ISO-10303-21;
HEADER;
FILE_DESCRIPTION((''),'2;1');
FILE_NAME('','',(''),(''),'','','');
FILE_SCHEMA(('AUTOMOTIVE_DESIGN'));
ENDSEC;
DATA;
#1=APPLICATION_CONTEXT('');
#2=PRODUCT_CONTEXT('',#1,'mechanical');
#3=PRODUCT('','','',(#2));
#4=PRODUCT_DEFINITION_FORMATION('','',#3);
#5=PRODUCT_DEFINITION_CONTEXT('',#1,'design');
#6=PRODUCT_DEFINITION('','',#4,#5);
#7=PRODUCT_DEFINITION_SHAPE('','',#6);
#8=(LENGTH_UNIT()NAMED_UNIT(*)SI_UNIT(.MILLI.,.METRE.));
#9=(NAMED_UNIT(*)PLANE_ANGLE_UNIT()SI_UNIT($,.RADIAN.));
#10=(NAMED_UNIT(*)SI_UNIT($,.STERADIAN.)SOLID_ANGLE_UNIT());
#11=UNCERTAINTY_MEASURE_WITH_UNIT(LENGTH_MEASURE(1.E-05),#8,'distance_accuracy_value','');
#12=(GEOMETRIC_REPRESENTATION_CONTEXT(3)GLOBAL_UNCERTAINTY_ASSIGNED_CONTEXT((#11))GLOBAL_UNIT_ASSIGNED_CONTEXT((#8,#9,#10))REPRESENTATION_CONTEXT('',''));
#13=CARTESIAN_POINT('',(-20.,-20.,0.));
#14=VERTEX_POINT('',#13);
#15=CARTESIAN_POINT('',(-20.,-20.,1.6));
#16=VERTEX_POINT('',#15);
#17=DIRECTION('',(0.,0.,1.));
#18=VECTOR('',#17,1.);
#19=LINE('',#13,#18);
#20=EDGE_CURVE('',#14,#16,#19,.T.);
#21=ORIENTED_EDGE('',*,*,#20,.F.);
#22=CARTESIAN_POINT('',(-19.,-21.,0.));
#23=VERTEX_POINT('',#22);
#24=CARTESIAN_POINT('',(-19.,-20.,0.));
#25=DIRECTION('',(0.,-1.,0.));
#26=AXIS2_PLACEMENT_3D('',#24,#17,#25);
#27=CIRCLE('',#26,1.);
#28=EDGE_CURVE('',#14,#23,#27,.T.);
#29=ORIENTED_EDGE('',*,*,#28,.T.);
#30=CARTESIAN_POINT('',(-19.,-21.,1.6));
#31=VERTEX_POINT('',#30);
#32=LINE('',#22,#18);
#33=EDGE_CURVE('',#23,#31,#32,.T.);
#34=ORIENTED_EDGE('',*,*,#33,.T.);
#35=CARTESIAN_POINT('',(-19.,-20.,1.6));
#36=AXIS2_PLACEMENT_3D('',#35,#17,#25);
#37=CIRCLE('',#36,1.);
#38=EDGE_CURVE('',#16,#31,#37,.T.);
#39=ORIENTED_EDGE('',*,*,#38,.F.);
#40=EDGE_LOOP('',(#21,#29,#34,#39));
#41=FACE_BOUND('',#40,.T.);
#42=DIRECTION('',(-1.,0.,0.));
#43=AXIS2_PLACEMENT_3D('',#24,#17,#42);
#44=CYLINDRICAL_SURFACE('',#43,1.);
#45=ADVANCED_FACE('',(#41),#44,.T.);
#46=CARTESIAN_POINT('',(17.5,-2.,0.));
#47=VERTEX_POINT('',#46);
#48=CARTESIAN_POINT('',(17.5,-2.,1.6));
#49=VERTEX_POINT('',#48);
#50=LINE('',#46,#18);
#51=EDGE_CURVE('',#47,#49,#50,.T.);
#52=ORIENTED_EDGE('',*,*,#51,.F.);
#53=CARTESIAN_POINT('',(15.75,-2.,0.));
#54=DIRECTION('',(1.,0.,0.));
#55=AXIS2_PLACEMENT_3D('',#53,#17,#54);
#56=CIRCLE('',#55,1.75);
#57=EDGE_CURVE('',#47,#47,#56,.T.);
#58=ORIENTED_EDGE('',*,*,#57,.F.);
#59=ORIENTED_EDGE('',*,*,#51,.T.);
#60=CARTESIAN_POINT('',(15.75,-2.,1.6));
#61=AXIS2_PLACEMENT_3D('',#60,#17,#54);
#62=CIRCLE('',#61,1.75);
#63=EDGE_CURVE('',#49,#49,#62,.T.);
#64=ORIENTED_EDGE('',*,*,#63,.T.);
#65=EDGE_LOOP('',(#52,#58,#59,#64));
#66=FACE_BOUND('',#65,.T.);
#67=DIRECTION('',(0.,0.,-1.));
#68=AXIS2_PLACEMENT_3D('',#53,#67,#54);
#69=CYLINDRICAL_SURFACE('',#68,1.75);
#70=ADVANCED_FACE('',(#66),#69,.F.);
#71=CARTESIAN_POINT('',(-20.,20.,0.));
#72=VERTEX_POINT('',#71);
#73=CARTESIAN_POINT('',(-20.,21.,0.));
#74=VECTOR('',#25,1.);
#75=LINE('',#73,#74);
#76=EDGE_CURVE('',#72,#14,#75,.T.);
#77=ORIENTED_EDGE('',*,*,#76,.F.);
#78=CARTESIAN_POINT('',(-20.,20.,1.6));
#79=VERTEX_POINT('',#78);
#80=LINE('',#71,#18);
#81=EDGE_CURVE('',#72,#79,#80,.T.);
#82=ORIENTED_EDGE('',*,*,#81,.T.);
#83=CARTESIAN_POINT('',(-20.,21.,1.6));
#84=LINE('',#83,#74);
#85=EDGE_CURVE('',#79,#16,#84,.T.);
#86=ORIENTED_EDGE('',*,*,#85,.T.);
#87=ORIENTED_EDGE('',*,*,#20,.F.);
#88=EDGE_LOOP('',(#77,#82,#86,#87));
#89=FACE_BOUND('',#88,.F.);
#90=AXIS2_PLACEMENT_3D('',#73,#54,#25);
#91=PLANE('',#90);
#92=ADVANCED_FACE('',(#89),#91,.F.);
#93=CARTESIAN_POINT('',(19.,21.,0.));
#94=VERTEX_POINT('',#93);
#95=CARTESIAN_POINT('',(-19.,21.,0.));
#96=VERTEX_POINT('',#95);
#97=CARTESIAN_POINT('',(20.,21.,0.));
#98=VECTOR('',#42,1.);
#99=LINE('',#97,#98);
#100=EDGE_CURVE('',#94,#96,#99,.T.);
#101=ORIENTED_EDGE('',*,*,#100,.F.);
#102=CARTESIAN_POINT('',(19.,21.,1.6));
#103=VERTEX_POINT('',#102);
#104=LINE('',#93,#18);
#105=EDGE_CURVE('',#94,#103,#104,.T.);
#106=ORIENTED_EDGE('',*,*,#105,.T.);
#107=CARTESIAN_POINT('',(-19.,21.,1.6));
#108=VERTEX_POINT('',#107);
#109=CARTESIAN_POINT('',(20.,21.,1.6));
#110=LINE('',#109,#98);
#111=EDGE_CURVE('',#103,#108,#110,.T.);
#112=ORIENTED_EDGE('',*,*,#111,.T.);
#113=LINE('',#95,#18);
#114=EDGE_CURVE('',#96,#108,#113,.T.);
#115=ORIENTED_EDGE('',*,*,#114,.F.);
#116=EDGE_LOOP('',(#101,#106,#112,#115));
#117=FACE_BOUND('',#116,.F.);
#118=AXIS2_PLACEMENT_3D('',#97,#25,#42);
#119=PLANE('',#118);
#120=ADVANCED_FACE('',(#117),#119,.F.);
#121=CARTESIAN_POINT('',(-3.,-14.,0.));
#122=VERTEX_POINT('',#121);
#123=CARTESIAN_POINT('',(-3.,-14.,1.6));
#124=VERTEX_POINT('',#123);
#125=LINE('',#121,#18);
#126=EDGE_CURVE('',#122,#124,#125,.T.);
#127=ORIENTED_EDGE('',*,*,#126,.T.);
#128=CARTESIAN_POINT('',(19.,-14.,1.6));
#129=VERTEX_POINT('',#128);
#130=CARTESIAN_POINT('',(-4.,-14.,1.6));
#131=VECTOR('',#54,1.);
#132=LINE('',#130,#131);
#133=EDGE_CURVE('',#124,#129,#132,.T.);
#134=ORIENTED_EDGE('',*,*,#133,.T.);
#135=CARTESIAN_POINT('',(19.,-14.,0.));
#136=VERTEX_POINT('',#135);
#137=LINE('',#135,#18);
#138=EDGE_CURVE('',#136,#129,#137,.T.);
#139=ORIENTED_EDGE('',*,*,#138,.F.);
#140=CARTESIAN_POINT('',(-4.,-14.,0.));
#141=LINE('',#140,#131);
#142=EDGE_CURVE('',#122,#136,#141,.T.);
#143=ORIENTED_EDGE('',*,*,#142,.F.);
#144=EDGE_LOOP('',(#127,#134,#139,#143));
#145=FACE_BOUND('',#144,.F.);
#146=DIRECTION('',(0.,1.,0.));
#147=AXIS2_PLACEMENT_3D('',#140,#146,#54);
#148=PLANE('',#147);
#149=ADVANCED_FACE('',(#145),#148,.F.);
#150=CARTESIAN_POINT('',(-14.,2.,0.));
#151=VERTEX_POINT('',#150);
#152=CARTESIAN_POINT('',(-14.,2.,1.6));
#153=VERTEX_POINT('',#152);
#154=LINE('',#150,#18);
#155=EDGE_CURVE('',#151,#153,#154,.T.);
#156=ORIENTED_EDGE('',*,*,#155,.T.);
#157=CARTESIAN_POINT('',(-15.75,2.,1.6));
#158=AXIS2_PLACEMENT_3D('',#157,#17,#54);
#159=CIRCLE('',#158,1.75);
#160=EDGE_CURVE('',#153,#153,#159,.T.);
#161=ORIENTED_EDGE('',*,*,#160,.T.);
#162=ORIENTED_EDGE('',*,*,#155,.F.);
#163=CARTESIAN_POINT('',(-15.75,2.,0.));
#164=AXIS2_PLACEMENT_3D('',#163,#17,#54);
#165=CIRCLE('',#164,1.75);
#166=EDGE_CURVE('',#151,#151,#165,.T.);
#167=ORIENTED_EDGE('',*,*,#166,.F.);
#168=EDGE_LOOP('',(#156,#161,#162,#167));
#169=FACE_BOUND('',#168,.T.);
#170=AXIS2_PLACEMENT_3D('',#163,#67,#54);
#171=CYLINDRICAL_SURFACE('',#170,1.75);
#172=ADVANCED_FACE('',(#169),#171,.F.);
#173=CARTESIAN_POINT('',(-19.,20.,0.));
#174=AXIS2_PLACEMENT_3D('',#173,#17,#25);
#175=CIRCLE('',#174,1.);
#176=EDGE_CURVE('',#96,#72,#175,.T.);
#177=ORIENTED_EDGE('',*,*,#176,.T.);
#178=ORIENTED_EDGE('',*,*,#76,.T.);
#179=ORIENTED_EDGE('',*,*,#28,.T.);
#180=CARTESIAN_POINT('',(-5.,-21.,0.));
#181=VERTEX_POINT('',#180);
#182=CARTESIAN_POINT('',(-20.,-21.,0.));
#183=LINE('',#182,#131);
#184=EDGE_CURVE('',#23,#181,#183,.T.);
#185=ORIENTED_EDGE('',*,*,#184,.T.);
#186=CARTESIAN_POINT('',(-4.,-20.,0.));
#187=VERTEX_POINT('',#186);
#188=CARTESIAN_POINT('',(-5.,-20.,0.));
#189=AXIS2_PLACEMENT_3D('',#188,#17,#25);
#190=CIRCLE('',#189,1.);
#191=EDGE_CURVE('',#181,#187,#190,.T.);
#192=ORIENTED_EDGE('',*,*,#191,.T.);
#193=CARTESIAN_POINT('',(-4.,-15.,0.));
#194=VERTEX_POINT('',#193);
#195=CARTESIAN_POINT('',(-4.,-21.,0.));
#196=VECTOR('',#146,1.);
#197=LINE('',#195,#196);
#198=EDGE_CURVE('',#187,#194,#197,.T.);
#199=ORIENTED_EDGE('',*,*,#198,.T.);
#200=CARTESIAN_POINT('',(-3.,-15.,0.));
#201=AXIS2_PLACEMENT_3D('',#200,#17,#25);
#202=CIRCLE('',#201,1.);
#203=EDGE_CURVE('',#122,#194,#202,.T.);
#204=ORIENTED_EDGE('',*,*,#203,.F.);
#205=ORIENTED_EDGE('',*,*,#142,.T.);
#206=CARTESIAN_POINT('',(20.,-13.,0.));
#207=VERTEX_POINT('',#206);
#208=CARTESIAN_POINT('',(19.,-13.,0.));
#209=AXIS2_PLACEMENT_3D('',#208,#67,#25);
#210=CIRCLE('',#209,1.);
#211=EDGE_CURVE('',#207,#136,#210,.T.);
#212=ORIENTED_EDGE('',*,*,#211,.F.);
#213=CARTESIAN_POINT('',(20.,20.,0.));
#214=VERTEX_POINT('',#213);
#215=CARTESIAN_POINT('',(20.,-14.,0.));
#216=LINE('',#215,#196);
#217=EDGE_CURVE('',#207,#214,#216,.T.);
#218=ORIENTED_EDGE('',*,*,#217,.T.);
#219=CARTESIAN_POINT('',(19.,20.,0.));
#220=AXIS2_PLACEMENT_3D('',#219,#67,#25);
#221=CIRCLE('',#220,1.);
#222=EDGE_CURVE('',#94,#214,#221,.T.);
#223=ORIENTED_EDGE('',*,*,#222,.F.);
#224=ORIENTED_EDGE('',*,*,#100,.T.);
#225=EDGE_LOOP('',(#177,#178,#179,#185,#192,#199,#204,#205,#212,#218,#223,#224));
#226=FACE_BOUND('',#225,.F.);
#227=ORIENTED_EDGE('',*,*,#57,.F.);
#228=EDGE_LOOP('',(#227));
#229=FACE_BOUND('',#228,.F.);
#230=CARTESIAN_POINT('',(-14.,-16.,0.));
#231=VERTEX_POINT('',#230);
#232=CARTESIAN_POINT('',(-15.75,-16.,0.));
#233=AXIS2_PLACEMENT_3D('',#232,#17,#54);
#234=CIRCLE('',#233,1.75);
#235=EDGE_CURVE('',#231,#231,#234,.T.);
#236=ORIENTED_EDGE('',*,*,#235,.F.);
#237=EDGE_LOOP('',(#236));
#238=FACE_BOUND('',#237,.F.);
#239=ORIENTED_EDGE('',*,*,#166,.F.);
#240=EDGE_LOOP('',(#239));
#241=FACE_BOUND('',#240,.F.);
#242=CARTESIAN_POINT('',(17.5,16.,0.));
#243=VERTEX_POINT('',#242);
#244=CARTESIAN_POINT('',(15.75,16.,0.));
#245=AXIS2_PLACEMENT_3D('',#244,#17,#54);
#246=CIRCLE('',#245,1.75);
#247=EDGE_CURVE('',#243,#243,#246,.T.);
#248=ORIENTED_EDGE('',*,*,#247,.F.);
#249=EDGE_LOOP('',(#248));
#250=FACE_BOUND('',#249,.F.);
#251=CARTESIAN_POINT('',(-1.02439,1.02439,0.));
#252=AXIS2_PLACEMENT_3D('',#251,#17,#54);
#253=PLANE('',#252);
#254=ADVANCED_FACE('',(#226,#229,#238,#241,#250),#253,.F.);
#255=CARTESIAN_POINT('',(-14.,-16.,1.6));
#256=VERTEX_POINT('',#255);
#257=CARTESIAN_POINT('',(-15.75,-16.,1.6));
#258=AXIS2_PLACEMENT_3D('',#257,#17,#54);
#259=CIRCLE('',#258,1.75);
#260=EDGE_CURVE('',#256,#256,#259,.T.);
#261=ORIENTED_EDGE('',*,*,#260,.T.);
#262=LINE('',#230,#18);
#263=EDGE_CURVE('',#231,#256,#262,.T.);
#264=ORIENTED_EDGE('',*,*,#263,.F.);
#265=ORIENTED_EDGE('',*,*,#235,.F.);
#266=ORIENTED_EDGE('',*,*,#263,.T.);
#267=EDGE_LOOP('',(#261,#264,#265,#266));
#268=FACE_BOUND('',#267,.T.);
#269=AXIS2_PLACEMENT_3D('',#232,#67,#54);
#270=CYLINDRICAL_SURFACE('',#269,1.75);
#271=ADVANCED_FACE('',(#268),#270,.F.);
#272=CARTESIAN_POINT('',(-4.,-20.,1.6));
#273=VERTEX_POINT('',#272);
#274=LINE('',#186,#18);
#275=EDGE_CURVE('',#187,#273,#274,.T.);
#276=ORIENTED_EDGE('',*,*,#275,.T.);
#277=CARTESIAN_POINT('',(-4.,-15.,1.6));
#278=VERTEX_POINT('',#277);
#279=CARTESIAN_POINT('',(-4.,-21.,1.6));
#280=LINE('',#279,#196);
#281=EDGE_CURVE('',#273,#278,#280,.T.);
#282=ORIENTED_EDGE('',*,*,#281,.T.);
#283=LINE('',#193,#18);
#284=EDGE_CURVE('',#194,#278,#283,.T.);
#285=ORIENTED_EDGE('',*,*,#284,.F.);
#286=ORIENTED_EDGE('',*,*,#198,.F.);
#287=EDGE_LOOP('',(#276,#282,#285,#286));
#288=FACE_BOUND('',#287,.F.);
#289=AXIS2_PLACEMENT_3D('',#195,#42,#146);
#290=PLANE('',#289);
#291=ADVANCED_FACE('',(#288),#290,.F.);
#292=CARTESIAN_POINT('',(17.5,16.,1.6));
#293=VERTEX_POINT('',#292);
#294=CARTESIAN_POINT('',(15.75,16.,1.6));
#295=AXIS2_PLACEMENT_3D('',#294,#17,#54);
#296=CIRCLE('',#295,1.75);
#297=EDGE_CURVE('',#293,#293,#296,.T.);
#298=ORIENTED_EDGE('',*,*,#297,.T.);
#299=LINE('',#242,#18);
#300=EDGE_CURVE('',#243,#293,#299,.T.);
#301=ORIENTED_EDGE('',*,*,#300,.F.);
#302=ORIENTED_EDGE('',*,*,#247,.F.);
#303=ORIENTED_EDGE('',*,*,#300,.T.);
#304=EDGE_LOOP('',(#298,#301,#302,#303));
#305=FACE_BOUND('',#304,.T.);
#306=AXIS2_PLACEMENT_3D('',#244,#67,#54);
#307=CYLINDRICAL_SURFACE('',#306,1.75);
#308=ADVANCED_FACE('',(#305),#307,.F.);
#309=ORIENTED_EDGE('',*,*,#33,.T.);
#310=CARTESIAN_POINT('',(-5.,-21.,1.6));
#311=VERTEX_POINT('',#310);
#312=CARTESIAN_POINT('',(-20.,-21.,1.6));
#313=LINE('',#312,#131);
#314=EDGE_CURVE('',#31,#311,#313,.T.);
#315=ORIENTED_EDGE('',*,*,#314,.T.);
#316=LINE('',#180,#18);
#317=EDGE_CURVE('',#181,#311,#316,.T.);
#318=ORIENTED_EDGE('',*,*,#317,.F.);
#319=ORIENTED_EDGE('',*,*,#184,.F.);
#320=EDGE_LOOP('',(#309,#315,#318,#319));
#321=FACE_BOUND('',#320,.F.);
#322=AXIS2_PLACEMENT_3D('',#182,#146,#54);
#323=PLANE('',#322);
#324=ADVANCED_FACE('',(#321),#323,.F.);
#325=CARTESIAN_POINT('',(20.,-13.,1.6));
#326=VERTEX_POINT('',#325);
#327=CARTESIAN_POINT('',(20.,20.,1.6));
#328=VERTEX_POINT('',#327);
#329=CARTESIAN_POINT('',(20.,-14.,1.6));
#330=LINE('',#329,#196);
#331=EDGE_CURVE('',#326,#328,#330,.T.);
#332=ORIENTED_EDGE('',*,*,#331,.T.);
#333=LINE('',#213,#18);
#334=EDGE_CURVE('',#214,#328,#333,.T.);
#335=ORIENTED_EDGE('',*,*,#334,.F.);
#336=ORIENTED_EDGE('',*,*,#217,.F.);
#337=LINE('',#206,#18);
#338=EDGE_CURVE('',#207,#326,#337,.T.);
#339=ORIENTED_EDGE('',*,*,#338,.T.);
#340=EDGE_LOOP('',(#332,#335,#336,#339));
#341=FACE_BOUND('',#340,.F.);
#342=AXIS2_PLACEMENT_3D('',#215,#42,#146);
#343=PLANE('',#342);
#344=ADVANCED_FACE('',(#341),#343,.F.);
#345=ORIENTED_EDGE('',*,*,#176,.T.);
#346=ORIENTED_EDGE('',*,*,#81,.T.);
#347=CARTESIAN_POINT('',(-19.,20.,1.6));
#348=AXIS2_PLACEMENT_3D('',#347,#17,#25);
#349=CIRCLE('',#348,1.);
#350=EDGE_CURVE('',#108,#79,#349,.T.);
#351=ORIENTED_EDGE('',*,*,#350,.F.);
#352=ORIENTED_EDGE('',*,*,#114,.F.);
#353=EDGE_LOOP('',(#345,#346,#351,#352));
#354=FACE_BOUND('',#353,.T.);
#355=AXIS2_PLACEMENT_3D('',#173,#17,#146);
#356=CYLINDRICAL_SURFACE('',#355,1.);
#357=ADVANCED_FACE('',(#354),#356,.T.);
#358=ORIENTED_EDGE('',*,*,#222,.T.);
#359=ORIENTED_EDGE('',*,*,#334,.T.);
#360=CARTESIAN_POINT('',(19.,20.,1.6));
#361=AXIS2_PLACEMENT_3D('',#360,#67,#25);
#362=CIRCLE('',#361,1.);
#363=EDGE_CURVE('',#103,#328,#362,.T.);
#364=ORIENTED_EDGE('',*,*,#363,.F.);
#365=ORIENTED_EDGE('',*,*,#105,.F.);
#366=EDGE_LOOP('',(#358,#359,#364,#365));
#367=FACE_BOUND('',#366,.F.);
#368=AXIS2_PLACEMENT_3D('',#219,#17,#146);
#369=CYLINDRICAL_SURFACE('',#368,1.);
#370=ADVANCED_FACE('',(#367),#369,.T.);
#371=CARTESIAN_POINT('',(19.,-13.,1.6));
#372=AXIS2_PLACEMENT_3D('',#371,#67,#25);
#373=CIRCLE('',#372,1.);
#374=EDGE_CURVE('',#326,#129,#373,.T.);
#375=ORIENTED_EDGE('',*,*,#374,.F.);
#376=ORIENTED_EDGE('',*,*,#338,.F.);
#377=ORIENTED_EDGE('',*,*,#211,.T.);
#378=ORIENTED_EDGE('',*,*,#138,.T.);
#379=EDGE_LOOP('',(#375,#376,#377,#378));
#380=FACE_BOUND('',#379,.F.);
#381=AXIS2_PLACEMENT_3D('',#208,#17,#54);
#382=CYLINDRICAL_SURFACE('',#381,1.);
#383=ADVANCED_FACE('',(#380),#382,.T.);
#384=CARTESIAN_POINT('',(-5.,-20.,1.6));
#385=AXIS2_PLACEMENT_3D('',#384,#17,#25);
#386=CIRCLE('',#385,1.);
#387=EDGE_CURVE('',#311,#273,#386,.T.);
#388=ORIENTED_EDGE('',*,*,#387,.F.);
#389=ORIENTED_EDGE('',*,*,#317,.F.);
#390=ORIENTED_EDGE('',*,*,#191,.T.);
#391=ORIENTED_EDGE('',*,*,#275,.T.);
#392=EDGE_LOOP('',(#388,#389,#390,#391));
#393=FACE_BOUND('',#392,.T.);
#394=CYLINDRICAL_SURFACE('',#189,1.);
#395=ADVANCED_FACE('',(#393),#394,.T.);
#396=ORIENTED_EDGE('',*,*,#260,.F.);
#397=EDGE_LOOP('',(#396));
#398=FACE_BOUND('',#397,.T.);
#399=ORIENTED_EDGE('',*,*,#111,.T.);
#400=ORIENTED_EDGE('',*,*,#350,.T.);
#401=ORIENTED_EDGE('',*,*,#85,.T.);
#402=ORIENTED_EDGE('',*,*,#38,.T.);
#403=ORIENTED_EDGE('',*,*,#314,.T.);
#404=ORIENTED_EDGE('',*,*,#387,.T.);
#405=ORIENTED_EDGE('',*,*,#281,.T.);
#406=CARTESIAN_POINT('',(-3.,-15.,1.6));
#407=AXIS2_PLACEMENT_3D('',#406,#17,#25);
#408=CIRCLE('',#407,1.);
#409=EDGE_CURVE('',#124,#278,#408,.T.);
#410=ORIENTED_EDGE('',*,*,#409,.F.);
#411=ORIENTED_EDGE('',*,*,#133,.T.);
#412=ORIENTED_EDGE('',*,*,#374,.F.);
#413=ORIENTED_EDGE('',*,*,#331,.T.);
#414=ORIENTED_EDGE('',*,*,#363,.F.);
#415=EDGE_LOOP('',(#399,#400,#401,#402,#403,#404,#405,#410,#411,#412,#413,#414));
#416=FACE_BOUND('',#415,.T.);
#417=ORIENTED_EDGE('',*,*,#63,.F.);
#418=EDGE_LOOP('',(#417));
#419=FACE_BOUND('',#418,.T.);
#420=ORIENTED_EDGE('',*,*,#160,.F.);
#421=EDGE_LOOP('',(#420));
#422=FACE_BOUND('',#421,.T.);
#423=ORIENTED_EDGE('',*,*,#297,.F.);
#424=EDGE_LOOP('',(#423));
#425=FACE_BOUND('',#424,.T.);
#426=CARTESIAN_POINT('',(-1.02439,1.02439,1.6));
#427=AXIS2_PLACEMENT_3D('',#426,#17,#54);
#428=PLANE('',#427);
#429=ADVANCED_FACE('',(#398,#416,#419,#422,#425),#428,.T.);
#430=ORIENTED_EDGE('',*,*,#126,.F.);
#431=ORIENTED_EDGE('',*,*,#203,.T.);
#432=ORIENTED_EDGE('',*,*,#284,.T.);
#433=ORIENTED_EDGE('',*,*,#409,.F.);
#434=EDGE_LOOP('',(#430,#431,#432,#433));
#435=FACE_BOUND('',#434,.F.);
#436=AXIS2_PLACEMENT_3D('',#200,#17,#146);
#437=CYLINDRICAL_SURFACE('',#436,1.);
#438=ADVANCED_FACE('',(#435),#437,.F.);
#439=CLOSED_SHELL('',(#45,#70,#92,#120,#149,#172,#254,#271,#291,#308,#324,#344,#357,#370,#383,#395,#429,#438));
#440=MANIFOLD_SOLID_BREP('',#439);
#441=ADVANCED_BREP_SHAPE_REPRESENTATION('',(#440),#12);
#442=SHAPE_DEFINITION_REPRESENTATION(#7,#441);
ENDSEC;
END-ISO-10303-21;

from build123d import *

# Parameters (mm, degrees)
F0_R     = 1.75
F1_DEPTH = 1.6
F2_R     = 1


with BuildPart() as f1:
    # F0 (on Top) → F1 (new body)
    with BuildSketch(Plane.XY):
        Polygon((20, 21), (-20, 21), (-20, -21), (-4, -21), (-4, -14), (20, -14), align=None)
        with Locations((-15.75, -16)):
            Circle(F0_R, mode=Mode.SUBTRACT)
        with Locations((15.75, -2)):
            Circle(F0_R, mode=Mode.SUBTRACT)
        with Locations((-15.75, 2)):
            Circle(F0_R, mode=Mode.SUBTRACT)
        with Locations((15.75, 16)):
            Circle(F0_R, mode=Mode.SUBTRACT)
    extrude(amount=F1_DEPTH)

    # F2
    f2_edges = [f1.edges().sort_by_distance(p)[0] for p in [
        (-20, -21, 0.8),
        (20, 21, 0.8),
        (-20, 21, 0.8),
        (-4, -14, 0.8),
        (-4, -21, 0.8),
        (20, -14, 0.8),
    ]]
    fillet(f2_edges, radius=F2_R)


solid = f1.part
